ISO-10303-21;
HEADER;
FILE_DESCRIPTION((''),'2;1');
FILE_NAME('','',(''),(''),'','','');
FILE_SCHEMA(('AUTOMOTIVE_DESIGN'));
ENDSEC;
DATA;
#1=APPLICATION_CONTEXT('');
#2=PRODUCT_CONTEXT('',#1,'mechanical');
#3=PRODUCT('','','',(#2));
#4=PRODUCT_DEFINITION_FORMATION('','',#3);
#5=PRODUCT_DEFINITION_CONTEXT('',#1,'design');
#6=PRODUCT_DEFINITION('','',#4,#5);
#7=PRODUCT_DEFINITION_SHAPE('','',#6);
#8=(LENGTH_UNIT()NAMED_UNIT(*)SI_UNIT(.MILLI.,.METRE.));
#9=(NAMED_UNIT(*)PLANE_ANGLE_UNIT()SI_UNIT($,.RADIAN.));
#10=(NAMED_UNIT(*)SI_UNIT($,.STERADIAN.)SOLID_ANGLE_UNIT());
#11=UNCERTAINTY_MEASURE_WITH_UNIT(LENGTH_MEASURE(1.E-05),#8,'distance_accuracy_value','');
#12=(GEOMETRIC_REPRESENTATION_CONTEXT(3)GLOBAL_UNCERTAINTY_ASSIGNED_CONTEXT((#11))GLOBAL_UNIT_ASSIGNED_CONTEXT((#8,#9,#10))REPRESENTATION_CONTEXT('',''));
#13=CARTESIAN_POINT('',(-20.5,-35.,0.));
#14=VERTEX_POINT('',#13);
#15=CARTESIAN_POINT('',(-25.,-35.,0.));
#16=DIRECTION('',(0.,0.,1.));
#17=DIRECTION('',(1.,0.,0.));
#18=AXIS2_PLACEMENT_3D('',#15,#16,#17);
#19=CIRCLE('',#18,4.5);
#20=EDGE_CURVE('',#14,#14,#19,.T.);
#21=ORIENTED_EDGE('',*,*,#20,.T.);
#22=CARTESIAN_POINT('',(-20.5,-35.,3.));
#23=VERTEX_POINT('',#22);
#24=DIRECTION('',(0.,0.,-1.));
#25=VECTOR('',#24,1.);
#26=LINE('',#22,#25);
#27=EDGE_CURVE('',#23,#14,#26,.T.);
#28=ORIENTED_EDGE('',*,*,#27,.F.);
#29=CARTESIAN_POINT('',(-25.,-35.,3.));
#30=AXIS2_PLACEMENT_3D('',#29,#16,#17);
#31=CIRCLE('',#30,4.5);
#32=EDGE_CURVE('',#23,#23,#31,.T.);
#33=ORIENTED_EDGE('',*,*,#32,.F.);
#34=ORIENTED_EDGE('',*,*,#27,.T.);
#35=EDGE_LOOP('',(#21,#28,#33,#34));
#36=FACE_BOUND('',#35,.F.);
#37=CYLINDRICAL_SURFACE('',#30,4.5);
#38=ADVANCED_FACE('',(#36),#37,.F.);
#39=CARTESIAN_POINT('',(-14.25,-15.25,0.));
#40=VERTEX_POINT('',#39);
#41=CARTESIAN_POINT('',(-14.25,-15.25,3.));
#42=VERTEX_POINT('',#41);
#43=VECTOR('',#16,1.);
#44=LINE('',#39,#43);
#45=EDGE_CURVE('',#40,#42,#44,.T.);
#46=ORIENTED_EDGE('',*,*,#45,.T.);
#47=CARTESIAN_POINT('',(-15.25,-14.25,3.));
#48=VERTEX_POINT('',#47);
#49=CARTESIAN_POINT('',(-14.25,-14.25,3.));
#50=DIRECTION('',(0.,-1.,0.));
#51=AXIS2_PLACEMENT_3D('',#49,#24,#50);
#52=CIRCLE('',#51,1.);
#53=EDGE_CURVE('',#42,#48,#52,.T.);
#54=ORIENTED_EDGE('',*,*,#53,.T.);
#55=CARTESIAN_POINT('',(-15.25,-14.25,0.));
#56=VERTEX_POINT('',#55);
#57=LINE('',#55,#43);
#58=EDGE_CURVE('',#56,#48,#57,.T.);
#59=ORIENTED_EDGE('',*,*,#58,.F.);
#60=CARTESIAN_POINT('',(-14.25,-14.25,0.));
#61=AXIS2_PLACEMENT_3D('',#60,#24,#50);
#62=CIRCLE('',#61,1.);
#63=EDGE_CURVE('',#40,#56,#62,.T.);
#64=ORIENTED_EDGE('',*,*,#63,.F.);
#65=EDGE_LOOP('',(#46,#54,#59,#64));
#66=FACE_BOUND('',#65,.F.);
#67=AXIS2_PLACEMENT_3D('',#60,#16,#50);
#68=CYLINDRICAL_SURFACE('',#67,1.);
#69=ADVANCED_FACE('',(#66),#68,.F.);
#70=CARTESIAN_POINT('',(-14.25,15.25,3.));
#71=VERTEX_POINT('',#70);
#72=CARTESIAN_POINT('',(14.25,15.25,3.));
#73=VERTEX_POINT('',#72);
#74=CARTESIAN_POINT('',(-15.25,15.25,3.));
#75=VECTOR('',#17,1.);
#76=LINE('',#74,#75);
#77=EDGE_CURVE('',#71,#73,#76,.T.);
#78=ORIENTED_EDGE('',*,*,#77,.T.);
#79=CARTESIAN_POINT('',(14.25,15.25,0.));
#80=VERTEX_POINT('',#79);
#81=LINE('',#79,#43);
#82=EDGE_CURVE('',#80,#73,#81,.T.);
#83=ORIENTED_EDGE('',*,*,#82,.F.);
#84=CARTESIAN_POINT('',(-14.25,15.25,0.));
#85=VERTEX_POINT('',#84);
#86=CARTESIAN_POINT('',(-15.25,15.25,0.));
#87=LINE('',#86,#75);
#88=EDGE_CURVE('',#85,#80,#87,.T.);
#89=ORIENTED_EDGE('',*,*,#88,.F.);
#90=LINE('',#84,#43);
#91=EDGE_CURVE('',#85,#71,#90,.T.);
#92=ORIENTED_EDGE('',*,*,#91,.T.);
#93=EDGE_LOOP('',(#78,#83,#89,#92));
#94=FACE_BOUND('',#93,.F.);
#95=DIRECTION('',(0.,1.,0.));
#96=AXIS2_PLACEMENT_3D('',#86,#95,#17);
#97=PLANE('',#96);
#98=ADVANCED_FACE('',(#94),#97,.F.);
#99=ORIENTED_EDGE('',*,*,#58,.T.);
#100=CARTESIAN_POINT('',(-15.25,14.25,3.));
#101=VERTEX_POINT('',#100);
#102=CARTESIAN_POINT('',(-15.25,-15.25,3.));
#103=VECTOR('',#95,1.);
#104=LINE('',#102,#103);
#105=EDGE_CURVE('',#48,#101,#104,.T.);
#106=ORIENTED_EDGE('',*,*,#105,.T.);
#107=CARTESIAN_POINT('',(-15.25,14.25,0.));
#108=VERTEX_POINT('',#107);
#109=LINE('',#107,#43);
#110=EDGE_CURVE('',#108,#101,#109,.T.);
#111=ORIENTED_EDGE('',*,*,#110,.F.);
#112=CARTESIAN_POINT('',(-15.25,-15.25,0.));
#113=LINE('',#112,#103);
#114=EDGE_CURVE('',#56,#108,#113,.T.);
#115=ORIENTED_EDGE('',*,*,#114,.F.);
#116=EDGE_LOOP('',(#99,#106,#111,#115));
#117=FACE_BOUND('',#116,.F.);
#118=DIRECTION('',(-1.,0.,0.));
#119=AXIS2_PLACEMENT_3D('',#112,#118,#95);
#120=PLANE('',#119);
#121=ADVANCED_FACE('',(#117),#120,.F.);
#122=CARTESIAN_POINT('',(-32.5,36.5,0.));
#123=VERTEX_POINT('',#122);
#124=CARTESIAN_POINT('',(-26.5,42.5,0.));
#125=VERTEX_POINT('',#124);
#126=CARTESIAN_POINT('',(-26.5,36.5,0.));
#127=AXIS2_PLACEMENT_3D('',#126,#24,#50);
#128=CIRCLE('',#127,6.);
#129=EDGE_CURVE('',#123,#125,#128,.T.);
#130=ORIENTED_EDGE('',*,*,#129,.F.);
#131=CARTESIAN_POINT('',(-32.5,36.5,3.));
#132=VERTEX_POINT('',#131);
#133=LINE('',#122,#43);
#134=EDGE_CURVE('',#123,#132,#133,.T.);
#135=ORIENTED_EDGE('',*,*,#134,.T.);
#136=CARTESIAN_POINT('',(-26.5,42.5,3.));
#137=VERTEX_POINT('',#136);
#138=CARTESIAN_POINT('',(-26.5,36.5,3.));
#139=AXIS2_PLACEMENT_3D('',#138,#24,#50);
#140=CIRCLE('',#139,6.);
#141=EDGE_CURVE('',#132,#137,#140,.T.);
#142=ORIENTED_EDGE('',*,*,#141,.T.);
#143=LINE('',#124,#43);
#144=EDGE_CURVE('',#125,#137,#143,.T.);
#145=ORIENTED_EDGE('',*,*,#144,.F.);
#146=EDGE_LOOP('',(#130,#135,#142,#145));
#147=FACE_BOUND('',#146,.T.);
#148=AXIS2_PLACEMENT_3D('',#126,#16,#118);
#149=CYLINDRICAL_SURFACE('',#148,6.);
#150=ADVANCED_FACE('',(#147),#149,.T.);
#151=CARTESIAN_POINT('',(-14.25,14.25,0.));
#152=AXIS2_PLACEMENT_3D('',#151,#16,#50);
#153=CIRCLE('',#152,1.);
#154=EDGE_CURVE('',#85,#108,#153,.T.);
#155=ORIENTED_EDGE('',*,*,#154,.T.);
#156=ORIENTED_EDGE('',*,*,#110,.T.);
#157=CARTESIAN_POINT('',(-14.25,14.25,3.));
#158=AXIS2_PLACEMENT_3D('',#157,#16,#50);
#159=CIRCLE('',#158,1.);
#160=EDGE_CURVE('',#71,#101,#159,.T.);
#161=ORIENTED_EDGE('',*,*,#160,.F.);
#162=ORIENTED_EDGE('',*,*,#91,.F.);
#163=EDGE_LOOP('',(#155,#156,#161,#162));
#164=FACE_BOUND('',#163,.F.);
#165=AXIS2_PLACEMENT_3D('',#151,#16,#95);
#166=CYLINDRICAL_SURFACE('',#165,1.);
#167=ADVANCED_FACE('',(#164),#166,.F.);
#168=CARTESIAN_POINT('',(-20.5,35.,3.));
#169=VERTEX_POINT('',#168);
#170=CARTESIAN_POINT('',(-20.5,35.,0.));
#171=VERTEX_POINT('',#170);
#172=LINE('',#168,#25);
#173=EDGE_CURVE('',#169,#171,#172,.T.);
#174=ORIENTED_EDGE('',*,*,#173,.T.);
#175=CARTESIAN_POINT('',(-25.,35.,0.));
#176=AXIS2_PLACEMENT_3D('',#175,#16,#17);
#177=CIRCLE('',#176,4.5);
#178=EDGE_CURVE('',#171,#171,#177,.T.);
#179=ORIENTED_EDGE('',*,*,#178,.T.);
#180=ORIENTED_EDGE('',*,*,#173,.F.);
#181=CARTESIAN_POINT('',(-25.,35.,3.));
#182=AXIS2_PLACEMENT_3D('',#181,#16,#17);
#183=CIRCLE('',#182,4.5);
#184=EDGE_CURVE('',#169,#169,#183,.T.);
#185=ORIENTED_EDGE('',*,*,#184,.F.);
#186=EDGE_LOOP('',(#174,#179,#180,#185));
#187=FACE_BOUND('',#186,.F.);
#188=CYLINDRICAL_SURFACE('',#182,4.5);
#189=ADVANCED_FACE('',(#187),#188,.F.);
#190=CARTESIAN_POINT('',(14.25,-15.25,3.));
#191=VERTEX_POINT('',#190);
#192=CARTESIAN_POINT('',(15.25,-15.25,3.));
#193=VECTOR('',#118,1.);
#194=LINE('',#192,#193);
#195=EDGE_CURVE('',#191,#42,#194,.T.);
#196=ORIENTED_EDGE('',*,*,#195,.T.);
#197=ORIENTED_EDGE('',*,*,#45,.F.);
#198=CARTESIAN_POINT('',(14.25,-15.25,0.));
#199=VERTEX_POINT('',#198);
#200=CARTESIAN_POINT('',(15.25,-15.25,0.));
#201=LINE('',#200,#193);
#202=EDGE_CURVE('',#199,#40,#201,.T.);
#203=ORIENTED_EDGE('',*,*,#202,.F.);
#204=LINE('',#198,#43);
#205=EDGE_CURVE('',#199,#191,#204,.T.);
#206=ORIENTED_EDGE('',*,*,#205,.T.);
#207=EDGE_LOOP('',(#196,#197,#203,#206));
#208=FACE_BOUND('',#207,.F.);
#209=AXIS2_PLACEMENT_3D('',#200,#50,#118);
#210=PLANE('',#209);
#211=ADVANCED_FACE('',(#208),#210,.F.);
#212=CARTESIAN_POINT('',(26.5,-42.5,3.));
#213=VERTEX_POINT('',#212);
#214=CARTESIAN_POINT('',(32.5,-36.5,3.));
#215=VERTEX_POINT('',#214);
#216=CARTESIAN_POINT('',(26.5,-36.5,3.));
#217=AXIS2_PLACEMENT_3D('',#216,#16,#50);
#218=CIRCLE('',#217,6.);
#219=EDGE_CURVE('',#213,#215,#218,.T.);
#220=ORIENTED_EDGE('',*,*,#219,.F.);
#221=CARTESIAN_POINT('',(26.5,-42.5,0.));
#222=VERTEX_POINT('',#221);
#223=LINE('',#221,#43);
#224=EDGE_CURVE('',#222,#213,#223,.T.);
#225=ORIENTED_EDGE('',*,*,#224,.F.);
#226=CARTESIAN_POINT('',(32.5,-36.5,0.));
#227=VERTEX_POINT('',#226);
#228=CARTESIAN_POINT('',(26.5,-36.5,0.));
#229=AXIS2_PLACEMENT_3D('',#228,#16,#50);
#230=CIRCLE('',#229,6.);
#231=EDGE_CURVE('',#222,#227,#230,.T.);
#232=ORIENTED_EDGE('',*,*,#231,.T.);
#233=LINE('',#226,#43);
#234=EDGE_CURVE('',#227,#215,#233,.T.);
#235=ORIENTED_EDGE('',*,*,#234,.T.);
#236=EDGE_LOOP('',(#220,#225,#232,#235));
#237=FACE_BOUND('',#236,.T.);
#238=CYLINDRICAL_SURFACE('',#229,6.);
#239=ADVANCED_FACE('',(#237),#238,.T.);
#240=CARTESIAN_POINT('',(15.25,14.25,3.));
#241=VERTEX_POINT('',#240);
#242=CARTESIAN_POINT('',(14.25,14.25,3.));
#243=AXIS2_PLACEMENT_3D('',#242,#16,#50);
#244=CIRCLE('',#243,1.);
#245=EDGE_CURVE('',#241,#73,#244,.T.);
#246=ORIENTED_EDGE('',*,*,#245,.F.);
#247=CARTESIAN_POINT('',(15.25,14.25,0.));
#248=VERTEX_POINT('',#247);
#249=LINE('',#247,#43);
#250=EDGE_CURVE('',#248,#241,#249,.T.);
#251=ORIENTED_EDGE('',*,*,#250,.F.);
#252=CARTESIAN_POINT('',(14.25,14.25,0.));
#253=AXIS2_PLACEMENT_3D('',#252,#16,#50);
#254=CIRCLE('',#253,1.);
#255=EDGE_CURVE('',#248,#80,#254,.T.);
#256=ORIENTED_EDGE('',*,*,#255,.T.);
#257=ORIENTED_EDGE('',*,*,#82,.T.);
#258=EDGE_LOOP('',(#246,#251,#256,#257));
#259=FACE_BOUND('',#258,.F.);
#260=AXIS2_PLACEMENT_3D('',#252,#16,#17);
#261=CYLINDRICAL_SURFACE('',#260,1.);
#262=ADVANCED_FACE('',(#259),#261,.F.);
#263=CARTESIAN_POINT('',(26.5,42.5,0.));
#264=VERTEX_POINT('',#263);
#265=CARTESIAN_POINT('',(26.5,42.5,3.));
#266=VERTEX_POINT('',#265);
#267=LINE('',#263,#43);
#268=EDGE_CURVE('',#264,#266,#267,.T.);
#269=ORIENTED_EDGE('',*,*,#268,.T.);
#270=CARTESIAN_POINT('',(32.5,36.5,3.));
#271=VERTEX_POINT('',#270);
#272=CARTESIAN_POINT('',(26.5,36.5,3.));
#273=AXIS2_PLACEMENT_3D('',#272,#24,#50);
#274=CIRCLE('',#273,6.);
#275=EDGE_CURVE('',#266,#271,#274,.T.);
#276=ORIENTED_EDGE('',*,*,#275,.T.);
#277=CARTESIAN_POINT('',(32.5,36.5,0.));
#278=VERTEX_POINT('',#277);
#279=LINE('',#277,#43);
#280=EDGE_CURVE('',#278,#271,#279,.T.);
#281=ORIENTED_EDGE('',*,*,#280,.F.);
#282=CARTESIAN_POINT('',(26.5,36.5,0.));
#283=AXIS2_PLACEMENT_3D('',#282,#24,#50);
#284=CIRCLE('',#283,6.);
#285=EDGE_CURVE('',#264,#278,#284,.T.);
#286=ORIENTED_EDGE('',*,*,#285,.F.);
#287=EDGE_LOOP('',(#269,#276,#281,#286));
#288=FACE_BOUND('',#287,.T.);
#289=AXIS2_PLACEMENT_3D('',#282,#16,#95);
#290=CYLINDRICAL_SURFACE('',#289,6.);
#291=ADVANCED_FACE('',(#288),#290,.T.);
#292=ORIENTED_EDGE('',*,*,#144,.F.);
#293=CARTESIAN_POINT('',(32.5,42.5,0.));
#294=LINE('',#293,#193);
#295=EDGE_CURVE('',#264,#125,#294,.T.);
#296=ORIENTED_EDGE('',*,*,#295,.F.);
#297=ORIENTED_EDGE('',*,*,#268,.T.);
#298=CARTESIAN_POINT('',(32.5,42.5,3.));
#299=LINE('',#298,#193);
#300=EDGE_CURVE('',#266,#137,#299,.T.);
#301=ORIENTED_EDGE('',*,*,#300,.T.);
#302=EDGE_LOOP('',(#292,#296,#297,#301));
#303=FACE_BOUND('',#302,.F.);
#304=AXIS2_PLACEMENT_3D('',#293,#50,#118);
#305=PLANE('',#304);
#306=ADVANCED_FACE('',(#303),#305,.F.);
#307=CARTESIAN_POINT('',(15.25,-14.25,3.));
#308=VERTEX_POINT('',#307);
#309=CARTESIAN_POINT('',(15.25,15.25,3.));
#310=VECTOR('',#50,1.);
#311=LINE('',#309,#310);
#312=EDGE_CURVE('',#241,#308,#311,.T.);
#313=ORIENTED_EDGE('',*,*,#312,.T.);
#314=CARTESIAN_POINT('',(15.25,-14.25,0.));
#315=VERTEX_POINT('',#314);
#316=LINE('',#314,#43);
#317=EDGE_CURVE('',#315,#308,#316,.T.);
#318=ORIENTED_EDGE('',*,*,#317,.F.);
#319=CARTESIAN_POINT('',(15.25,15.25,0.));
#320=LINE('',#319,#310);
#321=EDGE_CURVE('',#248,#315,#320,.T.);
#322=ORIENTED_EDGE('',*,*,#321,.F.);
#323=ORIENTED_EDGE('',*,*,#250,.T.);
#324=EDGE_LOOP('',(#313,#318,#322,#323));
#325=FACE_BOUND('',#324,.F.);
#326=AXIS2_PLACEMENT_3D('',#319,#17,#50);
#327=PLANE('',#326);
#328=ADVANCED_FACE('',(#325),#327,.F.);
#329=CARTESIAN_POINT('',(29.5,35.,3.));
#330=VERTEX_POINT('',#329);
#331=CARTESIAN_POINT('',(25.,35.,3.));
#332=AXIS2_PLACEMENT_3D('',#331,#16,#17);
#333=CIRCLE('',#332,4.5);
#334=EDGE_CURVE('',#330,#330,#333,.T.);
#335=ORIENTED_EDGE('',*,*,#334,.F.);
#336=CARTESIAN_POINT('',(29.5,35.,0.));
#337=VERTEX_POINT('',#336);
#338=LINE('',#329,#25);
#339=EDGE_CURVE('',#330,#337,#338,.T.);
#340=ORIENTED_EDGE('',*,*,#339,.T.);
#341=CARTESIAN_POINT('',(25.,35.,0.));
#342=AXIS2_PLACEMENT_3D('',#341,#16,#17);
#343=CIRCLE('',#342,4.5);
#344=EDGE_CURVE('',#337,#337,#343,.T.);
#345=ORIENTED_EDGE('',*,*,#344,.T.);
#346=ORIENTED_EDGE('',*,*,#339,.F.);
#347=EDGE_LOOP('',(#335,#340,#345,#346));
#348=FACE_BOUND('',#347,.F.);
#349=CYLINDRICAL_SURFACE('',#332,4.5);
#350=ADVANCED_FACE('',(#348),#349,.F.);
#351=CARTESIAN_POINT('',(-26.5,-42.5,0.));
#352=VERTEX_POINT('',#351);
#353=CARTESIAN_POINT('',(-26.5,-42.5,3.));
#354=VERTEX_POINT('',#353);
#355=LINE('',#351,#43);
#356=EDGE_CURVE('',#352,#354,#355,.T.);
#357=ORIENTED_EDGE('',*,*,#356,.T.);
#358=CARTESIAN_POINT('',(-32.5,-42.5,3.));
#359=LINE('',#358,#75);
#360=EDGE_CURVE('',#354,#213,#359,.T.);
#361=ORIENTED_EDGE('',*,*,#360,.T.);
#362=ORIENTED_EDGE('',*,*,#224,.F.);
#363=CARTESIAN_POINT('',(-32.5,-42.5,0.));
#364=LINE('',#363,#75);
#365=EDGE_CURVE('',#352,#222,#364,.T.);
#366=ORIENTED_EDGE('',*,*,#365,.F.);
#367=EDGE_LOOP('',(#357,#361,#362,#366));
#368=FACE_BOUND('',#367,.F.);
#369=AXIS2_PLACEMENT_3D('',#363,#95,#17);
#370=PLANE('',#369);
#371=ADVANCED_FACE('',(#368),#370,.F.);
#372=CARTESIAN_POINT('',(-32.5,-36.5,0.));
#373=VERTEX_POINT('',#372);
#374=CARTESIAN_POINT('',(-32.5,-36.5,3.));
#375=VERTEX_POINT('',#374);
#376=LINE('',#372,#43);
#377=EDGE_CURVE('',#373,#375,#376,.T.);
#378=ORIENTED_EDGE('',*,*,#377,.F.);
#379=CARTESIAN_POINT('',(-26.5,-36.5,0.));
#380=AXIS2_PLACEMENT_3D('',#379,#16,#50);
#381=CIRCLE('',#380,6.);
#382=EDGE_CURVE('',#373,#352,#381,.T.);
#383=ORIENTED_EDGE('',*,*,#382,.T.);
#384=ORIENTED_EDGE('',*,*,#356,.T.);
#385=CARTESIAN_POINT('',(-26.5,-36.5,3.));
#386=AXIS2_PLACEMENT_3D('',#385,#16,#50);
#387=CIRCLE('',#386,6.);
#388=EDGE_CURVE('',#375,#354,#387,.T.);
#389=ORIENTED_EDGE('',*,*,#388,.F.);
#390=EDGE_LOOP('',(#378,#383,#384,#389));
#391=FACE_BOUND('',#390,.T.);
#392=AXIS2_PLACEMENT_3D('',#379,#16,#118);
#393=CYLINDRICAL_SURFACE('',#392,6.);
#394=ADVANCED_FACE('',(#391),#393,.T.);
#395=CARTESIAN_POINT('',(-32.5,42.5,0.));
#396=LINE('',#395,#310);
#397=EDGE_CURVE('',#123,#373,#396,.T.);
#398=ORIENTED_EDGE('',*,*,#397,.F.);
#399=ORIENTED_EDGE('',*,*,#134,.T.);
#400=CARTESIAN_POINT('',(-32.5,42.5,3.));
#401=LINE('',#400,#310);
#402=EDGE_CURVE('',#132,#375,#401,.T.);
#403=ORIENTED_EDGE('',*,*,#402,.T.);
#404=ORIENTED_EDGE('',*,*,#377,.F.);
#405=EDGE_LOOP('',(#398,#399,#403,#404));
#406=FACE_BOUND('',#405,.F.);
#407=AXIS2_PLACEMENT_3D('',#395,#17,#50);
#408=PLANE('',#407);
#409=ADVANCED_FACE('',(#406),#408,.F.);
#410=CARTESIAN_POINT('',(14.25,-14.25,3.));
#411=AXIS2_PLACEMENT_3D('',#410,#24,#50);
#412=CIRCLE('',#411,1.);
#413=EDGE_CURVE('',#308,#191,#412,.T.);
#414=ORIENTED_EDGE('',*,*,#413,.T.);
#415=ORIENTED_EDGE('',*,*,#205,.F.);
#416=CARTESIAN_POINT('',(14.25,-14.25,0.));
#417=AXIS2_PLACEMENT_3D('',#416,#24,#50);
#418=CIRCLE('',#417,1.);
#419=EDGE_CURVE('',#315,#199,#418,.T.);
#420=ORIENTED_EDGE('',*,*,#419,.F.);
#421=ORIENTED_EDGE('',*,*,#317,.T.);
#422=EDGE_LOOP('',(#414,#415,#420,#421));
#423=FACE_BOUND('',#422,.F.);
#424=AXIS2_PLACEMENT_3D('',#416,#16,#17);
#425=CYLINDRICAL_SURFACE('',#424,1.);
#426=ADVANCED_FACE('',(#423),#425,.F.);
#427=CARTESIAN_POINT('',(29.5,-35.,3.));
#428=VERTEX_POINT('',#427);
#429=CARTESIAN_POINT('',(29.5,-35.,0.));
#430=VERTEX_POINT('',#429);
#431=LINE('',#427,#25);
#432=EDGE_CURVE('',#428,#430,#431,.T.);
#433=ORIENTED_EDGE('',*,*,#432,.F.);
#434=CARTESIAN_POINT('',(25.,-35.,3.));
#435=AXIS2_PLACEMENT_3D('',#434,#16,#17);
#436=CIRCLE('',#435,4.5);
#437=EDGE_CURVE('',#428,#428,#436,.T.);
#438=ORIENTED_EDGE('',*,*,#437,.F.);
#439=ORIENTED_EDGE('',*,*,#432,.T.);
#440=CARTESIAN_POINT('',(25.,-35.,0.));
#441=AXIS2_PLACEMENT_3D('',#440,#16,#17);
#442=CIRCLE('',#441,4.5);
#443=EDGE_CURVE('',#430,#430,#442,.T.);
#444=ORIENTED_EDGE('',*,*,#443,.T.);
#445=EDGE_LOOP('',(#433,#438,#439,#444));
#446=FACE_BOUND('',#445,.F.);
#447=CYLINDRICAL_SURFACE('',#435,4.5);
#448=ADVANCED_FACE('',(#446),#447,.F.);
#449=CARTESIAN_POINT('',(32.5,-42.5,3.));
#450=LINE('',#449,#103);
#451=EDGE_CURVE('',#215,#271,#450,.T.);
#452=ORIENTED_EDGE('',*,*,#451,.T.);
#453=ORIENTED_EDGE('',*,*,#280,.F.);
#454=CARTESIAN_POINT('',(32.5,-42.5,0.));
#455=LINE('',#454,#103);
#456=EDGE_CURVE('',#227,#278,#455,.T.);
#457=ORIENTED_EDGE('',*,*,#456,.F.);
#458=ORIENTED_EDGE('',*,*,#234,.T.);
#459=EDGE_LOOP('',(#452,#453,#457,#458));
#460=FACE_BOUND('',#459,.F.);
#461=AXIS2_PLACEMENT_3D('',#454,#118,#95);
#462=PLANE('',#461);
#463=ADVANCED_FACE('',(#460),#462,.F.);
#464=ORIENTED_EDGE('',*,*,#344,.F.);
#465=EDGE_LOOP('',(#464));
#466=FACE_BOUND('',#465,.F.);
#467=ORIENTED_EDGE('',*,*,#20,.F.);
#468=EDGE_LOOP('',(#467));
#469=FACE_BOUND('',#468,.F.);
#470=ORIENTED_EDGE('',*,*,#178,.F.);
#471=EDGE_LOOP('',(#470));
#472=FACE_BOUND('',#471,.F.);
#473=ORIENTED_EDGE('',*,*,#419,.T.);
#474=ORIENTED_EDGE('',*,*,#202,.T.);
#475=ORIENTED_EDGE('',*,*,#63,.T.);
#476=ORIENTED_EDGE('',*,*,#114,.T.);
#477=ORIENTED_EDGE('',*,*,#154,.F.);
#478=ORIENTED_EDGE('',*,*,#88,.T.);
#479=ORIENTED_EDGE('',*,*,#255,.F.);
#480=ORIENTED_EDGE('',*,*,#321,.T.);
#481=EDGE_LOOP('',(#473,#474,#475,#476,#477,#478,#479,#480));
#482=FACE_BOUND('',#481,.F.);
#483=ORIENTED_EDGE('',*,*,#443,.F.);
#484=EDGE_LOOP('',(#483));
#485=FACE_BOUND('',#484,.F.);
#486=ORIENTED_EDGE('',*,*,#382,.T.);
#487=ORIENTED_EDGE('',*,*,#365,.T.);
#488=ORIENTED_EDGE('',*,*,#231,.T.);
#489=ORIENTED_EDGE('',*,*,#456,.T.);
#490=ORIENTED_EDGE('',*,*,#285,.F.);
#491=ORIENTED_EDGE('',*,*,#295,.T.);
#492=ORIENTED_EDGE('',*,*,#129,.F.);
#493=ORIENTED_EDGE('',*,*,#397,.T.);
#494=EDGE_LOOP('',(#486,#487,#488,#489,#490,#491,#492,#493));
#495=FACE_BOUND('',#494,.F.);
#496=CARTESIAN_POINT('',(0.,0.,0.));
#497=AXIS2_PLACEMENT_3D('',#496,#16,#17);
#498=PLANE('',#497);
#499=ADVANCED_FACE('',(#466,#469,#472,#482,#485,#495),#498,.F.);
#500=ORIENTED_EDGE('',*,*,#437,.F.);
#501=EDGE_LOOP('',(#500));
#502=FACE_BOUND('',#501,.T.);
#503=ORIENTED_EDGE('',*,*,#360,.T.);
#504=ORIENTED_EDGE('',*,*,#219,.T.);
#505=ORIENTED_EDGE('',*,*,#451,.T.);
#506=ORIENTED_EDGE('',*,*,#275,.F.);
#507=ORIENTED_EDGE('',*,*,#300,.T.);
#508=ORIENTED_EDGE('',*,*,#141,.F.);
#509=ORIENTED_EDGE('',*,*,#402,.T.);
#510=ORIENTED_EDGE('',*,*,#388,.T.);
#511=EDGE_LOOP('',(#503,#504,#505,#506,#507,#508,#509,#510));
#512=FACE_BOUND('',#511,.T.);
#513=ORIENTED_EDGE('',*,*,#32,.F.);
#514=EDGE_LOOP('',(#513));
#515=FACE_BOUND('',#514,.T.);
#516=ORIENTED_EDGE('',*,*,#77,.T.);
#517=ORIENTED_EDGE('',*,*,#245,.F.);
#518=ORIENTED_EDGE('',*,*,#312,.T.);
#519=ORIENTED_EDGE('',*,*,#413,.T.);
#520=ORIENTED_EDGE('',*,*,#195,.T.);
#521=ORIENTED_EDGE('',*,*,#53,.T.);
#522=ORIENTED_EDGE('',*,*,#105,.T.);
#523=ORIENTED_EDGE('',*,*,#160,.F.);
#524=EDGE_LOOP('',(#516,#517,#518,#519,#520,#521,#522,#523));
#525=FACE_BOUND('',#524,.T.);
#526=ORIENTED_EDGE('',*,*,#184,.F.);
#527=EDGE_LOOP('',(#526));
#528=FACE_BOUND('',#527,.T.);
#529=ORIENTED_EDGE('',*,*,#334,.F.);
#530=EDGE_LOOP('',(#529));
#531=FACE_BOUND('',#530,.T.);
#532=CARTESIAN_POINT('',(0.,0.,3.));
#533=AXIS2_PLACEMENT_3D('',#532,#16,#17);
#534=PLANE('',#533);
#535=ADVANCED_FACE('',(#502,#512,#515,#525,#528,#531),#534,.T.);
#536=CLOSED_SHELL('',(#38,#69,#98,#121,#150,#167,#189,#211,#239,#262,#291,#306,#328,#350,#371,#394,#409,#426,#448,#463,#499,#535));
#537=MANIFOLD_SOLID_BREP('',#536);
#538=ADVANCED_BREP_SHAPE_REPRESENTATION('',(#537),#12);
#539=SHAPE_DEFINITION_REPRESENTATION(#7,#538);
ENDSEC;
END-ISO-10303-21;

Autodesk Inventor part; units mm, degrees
ref_plane "YZ Plane" through (0, 0, 0) normal (1, 0, 0) x (0, 1, 0)
ref_plane "XZ Plane" through (0, 0, 0) normal (0, 1, 0) x (-1, 0, 0)
ref_plane "XY Plane" through (0, 0, 0) normal (0, 0, 1) x (1, 0, 0)
sketch "Sketch1" plane through (0, 0, 0) normal (0, 0, 1) x (1, 0, 0)
  line L0 (-32.5, -42.5) -> (32.5, -42.5)
  line L1 (32.5, -42.5) -> (32.5, 42.5)
  line L2 (32.5, 42.5) -> (-32.5, 42.5)
  line L3 (-32.5, 42.5) -> (-32.5, -42.5)
  line L4 (-32.5, -42.5) -> (32.5, 42.5) construction
  line L5 (32.5, -42.5) -> (-32.5, 42.5) construction
  line L6 (15.25, -15.25) -> (-15.25, -15.25)
  line L7 (-15.25, -15.25) -> (-15.25, 15.25)
  line L8 (-15.25, 15.25) -> (15.25, 15.25)
  line L9 (15.25, 15.25) -> (15.25, -15.25)
  line L10 (15.25, -15.25) -> (-15.25, 15.25) construction
  line L11 (-15.25, -15.25) -> (15.25, 15.25) construction
  point P0 (0, 0)
  dimension "d154" = 65
  dimension "d155" = 85
  dimension "d172" = 30.5
extrude "Plate5" add sketch "Sketch1" along normal blind 3
sketch "Sketch9" plane through (0, 0, 3) normal (0, 0, 1) x (1, 0, 0)
  circle A0 centre (25, -35) radius 4.5
  line L0 (25, 35) -> (-25, 35) construction
  line L1 (-25, 35) -> (-25, -35) construction
  line L2 (-25, -35) -> (25, -35) construction
  line L3 (25, -35) -> (25, 35) construction
  line L4 (25, 35) -> (-25, -35) construction
  line L5 (-25, 35) -> (25, -35) construction
  circle A1 centre (-25, -35) radius 4.5
  circle A2 centre (25, 35) radius 4.5
  circle A3 centre (-25, 35) radius 4.5
  point P0 (0, 0)
  dimension "d173" = 70
  dimension "d174" = 9
  dimension "d175" = 50
extrude "Cut2" cut sketch "Sketch9" against normal blind 3
fillet "Corner Round1" radius 6 4 edges at (32.5, 42.5, 1.5) (-32.5, 42.5, 1.5) (-32.5, -42.5, 1.5) (32.5, -42.5, 1.5)
fillet "Corner Round2" radius 1 4 edges at (-15.25, 15.25, 1.5) (-15.25, -15.25, 1.5) (15.25, -15.25, 1.5) (15.25, 15.25, 1.5)
properties part number "PNS 760 FDS 1200 FLANGE 3_1600" material "Stainless Steel"
